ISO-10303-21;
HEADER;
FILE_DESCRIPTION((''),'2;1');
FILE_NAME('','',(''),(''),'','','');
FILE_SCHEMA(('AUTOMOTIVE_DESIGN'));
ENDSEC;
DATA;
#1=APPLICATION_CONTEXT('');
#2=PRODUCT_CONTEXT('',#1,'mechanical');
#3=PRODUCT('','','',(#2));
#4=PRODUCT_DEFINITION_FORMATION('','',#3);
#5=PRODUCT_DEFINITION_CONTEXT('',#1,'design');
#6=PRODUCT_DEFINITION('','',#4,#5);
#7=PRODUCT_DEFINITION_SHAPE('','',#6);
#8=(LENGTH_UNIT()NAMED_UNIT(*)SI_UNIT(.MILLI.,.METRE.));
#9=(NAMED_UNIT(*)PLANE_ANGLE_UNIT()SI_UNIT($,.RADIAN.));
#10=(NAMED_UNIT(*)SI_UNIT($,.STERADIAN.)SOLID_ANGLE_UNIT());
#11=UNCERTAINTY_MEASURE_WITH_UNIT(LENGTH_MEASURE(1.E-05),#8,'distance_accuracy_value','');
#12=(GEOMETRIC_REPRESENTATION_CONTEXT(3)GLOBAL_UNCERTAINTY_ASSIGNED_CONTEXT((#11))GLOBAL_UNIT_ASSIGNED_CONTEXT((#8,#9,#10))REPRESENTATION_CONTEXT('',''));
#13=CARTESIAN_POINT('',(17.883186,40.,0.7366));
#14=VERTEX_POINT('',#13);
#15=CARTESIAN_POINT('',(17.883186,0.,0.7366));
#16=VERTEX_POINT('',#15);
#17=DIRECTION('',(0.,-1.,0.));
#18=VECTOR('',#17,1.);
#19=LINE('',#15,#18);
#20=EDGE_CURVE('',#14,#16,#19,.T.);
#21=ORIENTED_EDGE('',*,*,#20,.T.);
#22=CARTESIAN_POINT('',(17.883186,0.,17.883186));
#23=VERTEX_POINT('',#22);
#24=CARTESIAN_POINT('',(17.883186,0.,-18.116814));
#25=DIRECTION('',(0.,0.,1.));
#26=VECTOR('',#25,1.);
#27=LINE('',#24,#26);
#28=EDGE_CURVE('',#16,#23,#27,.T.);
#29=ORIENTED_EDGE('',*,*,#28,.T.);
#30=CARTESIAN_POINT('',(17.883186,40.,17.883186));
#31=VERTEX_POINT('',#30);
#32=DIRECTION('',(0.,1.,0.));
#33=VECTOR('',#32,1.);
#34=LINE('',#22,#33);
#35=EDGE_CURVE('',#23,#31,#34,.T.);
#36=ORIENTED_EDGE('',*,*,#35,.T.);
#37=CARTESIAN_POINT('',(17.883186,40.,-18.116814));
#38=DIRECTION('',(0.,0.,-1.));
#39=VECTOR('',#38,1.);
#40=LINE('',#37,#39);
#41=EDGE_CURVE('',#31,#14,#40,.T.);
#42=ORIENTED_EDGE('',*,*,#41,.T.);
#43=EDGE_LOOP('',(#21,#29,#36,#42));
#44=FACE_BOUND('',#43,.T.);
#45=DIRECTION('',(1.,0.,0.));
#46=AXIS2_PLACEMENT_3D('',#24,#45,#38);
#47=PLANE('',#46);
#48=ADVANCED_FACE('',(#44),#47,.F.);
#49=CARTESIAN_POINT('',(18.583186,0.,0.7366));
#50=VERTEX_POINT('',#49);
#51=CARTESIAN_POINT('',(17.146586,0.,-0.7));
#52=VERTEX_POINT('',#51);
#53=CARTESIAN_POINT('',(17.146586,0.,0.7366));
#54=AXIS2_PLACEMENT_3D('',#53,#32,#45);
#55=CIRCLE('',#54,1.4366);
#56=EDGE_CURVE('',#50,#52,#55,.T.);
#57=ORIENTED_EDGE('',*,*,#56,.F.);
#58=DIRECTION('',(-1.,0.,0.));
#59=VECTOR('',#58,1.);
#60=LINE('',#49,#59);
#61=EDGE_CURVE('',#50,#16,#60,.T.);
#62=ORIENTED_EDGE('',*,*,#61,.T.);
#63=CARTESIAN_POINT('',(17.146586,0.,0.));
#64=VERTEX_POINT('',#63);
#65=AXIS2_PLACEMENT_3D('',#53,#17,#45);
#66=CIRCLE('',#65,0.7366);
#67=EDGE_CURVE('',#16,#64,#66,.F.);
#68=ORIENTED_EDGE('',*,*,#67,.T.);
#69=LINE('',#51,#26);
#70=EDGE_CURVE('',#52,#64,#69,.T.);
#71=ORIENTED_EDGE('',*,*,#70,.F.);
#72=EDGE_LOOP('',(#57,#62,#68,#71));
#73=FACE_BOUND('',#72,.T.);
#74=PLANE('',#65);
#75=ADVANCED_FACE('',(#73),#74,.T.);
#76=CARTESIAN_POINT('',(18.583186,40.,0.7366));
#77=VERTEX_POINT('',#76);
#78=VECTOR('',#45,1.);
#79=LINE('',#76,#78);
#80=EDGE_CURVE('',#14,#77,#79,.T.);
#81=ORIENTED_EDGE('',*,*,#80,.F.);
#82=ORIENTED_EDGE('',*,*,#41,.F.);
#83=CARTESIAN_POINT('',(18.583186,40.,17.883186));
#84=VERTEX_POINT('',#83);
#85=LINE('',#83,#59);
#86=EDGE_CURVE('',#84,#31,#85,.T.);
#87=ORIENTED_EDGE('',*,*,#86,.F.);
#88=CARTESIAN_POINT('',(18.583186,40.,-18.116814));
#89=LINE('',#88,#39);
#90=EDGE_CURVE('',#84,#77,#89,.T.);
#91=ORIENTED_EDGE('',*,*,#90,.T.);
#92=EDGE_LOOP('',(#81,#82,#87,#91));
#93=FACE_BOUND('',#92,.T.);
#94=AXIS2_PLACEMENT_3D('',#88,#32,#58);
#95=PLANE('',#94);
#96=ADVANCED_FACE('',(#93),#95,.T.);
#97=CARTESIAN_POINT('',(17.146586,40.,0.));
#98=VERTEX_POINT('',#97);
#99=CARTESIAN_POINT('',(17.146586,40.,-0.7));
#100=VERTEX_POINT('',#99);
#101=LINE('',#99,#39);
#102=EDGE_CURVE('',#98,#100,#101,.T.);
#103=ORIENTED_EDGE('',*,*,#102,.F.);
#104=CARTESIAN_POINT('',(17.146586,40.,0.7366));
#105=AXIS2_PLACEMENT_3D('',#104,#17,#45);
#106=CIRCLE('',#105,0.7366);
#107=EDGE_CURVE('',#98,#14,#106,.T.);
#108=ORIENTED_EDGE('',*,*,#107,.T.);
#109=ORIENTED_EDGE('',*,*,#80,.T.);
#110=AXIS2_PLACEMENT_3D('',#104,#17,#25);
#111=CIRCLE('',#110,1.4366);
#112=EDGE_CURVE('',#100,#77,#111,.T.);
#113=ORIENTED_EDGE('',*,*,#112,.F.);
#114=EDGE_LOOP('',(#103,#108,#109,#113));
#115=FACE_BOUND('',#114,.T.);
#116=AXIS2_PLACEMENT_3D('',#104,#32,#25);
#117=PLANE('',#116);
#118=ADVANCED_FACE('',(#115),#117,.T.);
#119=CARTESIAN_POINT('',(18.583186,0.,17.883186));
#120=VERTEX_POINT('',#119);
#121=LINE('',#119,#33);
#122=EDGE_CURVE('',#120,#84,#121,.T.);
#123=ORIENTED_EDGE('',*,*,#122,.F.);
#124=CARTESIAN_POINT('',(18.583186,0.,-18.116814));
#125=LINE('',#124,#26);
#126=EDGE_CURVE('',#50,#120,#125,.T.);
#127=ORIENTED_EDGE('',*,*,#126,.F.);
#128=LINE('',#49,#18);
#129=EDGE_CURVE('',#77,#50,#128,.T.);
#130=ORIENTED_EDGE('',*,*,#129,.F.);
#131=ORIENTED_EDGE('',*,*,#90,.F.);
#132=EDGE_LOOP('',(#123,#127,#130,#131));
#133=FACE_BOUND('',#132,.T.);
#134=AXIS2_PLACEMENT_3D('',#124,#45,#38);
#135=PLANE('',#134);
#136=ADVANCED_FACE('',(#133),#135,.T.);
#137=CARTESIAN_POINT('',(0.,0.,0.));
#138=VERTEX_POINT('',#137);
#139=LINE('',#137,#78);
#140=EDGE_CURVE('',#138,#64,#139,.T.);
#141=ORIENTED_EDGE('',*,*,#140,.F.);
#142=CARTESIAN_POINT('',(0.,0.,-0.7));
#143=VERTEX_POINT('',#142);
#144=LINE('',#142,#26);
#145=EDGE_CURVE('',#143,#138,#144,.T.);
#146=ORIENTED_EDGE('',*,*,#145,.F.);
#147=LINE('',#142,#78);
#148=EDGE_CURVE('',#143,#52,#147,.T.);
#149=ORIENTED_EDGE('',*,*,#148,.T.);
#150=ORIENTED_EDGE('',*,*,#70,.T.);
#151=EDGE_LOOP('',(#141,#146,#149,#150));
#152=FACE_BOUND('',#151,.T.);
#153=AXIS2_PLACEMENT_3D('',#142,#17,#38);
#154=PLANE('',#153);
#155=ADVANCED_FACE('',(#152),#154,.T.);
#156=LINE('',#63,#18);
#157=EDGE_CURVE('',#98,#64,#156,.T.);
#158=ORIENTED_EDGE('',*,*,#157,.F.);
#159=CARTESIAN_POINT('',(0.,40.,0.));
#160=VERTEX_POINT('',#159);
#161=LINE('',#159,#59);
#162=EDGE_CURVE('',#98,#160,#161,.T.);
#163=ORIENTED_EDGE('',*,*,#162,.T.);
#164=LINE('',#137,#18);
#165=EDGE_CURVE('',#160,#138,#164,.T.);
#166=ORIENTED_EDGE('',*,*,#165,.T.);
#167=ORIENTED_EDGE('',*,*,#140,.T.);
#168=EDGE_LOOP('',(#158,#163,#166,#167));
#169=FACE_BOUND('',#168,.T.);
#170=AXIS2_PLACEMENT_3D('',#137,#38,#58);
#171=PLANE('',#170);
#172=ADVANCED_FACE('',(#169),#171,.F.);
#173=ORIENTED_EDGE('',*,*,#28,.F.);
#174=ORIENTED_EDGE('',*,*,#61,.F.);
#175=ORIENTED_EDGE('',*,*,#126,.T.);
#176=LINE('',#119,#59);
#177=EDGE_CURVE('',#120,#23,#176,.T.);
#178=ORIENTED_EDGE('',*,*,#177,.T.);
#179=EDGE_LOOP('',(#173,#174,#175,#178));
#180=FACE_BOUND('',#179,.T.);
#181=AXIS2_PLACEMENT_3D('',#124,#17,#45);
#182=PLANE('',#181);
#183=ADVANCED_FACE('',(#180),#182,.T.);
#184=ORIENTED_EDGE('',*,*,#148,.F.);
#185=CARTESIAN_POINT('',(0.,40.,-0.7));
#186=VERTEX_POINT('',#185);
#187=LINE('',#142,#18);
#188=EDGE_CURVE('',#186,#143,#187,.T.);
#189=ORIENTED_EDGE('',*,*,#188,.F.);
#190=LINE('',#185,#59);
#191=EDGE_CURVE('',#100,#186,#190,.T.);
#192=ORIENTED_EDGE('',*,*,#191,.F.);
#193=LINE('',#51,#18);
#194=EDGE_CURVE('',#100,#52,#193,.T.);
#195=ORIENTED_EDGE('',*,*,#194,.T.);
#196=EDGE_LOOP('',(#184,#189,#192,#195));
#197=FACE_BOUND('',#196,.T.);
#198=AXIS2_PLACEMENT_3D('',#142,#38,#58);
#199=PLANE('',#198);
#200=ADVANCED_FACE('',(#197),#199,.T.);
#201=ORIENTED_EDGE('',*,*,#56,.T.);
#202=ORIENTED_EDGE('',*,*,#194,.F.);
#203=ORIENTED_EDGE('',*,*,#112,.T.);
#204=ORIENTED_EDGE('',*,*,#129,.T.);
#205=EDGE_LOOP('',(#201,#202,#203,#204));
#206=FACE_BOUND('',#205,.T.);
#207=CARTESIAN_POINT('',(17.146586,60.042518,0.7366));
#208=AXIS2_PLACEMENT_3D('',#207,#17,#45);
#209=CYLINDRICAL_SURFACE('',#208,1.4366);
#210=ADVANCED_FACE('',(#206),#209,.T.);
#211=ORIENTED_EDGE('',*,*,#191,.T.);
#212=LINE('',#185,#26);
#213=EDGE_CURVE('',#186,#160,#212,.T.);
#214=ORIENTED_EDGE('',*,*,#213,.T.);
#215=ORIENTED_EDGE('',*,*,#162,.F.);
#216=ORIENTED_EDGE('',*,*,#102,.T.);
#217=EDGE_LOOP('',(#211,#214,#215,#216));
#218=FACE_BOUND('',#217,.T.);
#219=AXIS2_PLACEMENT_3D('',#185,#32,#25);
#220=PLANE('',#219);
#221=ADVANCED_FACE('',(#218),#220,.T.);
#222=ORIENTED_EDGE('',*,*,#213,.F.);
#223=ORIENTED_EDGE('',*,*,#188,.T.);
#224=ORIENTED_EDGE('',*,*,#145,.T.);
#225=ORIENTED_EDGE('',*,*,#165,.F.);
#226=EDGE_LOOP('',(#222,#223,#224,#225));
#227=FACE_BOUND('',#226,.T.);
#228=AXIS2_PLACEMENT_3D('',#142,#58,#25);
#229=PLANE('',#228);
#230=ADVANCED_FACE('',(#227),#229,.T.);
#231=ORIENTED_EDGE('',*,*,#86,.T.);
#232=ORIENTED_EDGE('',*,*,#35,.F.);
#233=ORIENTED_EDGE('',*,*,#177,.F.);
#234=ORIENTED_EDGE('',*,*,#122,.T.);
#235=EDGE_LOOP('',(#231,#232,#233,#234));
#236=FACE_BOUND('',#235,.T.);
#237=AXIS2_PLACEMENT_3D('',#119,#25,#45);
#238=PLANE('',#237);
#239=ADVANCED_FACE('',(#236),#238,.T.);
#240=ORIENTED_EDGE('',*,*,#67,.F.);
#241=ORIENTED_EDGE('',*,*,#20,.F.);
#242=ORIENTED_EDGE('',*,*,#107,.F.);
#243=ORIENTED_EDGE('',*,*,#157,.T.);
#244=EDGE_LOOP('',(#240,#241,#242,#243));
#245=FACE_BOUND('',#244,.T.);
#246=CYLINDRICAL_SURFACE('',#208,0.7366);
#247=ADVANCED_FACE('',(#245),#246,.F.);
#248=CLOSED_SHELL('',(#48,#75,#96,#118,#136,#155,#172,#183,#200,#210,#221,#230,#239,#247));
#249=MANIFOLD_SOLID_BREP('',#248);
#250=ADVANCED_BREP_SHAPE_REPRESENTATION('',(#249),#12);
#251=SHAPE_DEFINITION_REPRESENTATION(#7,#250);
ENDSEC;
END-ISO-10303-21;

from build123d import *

# Parameters (mm, degrees)
SKETCH1_W              = 36
SKETCH1_H              = 40
BASE_FLANGE1_DEPTH     = 0.7
SKETCHED_BEND1_DEPTH   = 40
SKETCHED_BEND1_2_DEPTH = 40


# Read off the part's stored shape, not the designer's step: Sketched Bend1
# Sheet-metal steps are written as plain solids
with BuildPart() as part:
    # Sketch1 → Base-Flange1 (new body)
    with BuildSketch(Plane.XY):
        with Locations((18, 20)):
            Rectangle(SKETCH1_W, SKETCH1_H)
    extrude(amount=-BASE_FLANGE1_DEPTH)

    # Sketched Bend1 outline → Sketched Bend1 (cut)
    with BuildSketch(Plane(origin=(0, 0, 0), x_dir=(1, 0, 0), z_dir=(0, 1, 0))):
        with BuildLine():
            ThreePointArc((17.146586356, 0.7), (17.855677324, 0.512803682), (18.379971941, 0))
            Line((18.379971941, 0), (36, 0))
            Line((36, 0), (36, 0.7))
            Line((36, 0.7), (17.146586356, 0.7))
        make_face()
    extrude(amount=SKETCHED_BEND1_DEPTH, mode=Mode.SUBTRACT)

    # Sketched Bend1 2 outline → Sketched Bend1 2 (add)
    with BuildSketch(Plane(origin=(0, 0, 0), x_dir=(1, 0, 0), z_dir=(0, 1, 0))):
        with BuildLine():
            Line((17.883186356, -0.7366), (17.883186356, -17.883186356))
            Line((17.883186356, -17.883186356), (18.583186356, -17.883186356))
            Line((18.583186356, -17.883186356), (18.583186356, -0.7366))
            ThreePointArc((18.583186356, -0.7366), (18.531451203, -0.354541216), (18.379971941, 0))
            Line((18.379971941, 0), (17.146586356, 0))
            ThreePointArc((17.146586356, 0), (17.667441211, -0.215745145), (17.883186356, -0.7366))
        make_face()
    extrude(amount=SKETCHED_BEND1_2_DEPTH)


solid = part.part
